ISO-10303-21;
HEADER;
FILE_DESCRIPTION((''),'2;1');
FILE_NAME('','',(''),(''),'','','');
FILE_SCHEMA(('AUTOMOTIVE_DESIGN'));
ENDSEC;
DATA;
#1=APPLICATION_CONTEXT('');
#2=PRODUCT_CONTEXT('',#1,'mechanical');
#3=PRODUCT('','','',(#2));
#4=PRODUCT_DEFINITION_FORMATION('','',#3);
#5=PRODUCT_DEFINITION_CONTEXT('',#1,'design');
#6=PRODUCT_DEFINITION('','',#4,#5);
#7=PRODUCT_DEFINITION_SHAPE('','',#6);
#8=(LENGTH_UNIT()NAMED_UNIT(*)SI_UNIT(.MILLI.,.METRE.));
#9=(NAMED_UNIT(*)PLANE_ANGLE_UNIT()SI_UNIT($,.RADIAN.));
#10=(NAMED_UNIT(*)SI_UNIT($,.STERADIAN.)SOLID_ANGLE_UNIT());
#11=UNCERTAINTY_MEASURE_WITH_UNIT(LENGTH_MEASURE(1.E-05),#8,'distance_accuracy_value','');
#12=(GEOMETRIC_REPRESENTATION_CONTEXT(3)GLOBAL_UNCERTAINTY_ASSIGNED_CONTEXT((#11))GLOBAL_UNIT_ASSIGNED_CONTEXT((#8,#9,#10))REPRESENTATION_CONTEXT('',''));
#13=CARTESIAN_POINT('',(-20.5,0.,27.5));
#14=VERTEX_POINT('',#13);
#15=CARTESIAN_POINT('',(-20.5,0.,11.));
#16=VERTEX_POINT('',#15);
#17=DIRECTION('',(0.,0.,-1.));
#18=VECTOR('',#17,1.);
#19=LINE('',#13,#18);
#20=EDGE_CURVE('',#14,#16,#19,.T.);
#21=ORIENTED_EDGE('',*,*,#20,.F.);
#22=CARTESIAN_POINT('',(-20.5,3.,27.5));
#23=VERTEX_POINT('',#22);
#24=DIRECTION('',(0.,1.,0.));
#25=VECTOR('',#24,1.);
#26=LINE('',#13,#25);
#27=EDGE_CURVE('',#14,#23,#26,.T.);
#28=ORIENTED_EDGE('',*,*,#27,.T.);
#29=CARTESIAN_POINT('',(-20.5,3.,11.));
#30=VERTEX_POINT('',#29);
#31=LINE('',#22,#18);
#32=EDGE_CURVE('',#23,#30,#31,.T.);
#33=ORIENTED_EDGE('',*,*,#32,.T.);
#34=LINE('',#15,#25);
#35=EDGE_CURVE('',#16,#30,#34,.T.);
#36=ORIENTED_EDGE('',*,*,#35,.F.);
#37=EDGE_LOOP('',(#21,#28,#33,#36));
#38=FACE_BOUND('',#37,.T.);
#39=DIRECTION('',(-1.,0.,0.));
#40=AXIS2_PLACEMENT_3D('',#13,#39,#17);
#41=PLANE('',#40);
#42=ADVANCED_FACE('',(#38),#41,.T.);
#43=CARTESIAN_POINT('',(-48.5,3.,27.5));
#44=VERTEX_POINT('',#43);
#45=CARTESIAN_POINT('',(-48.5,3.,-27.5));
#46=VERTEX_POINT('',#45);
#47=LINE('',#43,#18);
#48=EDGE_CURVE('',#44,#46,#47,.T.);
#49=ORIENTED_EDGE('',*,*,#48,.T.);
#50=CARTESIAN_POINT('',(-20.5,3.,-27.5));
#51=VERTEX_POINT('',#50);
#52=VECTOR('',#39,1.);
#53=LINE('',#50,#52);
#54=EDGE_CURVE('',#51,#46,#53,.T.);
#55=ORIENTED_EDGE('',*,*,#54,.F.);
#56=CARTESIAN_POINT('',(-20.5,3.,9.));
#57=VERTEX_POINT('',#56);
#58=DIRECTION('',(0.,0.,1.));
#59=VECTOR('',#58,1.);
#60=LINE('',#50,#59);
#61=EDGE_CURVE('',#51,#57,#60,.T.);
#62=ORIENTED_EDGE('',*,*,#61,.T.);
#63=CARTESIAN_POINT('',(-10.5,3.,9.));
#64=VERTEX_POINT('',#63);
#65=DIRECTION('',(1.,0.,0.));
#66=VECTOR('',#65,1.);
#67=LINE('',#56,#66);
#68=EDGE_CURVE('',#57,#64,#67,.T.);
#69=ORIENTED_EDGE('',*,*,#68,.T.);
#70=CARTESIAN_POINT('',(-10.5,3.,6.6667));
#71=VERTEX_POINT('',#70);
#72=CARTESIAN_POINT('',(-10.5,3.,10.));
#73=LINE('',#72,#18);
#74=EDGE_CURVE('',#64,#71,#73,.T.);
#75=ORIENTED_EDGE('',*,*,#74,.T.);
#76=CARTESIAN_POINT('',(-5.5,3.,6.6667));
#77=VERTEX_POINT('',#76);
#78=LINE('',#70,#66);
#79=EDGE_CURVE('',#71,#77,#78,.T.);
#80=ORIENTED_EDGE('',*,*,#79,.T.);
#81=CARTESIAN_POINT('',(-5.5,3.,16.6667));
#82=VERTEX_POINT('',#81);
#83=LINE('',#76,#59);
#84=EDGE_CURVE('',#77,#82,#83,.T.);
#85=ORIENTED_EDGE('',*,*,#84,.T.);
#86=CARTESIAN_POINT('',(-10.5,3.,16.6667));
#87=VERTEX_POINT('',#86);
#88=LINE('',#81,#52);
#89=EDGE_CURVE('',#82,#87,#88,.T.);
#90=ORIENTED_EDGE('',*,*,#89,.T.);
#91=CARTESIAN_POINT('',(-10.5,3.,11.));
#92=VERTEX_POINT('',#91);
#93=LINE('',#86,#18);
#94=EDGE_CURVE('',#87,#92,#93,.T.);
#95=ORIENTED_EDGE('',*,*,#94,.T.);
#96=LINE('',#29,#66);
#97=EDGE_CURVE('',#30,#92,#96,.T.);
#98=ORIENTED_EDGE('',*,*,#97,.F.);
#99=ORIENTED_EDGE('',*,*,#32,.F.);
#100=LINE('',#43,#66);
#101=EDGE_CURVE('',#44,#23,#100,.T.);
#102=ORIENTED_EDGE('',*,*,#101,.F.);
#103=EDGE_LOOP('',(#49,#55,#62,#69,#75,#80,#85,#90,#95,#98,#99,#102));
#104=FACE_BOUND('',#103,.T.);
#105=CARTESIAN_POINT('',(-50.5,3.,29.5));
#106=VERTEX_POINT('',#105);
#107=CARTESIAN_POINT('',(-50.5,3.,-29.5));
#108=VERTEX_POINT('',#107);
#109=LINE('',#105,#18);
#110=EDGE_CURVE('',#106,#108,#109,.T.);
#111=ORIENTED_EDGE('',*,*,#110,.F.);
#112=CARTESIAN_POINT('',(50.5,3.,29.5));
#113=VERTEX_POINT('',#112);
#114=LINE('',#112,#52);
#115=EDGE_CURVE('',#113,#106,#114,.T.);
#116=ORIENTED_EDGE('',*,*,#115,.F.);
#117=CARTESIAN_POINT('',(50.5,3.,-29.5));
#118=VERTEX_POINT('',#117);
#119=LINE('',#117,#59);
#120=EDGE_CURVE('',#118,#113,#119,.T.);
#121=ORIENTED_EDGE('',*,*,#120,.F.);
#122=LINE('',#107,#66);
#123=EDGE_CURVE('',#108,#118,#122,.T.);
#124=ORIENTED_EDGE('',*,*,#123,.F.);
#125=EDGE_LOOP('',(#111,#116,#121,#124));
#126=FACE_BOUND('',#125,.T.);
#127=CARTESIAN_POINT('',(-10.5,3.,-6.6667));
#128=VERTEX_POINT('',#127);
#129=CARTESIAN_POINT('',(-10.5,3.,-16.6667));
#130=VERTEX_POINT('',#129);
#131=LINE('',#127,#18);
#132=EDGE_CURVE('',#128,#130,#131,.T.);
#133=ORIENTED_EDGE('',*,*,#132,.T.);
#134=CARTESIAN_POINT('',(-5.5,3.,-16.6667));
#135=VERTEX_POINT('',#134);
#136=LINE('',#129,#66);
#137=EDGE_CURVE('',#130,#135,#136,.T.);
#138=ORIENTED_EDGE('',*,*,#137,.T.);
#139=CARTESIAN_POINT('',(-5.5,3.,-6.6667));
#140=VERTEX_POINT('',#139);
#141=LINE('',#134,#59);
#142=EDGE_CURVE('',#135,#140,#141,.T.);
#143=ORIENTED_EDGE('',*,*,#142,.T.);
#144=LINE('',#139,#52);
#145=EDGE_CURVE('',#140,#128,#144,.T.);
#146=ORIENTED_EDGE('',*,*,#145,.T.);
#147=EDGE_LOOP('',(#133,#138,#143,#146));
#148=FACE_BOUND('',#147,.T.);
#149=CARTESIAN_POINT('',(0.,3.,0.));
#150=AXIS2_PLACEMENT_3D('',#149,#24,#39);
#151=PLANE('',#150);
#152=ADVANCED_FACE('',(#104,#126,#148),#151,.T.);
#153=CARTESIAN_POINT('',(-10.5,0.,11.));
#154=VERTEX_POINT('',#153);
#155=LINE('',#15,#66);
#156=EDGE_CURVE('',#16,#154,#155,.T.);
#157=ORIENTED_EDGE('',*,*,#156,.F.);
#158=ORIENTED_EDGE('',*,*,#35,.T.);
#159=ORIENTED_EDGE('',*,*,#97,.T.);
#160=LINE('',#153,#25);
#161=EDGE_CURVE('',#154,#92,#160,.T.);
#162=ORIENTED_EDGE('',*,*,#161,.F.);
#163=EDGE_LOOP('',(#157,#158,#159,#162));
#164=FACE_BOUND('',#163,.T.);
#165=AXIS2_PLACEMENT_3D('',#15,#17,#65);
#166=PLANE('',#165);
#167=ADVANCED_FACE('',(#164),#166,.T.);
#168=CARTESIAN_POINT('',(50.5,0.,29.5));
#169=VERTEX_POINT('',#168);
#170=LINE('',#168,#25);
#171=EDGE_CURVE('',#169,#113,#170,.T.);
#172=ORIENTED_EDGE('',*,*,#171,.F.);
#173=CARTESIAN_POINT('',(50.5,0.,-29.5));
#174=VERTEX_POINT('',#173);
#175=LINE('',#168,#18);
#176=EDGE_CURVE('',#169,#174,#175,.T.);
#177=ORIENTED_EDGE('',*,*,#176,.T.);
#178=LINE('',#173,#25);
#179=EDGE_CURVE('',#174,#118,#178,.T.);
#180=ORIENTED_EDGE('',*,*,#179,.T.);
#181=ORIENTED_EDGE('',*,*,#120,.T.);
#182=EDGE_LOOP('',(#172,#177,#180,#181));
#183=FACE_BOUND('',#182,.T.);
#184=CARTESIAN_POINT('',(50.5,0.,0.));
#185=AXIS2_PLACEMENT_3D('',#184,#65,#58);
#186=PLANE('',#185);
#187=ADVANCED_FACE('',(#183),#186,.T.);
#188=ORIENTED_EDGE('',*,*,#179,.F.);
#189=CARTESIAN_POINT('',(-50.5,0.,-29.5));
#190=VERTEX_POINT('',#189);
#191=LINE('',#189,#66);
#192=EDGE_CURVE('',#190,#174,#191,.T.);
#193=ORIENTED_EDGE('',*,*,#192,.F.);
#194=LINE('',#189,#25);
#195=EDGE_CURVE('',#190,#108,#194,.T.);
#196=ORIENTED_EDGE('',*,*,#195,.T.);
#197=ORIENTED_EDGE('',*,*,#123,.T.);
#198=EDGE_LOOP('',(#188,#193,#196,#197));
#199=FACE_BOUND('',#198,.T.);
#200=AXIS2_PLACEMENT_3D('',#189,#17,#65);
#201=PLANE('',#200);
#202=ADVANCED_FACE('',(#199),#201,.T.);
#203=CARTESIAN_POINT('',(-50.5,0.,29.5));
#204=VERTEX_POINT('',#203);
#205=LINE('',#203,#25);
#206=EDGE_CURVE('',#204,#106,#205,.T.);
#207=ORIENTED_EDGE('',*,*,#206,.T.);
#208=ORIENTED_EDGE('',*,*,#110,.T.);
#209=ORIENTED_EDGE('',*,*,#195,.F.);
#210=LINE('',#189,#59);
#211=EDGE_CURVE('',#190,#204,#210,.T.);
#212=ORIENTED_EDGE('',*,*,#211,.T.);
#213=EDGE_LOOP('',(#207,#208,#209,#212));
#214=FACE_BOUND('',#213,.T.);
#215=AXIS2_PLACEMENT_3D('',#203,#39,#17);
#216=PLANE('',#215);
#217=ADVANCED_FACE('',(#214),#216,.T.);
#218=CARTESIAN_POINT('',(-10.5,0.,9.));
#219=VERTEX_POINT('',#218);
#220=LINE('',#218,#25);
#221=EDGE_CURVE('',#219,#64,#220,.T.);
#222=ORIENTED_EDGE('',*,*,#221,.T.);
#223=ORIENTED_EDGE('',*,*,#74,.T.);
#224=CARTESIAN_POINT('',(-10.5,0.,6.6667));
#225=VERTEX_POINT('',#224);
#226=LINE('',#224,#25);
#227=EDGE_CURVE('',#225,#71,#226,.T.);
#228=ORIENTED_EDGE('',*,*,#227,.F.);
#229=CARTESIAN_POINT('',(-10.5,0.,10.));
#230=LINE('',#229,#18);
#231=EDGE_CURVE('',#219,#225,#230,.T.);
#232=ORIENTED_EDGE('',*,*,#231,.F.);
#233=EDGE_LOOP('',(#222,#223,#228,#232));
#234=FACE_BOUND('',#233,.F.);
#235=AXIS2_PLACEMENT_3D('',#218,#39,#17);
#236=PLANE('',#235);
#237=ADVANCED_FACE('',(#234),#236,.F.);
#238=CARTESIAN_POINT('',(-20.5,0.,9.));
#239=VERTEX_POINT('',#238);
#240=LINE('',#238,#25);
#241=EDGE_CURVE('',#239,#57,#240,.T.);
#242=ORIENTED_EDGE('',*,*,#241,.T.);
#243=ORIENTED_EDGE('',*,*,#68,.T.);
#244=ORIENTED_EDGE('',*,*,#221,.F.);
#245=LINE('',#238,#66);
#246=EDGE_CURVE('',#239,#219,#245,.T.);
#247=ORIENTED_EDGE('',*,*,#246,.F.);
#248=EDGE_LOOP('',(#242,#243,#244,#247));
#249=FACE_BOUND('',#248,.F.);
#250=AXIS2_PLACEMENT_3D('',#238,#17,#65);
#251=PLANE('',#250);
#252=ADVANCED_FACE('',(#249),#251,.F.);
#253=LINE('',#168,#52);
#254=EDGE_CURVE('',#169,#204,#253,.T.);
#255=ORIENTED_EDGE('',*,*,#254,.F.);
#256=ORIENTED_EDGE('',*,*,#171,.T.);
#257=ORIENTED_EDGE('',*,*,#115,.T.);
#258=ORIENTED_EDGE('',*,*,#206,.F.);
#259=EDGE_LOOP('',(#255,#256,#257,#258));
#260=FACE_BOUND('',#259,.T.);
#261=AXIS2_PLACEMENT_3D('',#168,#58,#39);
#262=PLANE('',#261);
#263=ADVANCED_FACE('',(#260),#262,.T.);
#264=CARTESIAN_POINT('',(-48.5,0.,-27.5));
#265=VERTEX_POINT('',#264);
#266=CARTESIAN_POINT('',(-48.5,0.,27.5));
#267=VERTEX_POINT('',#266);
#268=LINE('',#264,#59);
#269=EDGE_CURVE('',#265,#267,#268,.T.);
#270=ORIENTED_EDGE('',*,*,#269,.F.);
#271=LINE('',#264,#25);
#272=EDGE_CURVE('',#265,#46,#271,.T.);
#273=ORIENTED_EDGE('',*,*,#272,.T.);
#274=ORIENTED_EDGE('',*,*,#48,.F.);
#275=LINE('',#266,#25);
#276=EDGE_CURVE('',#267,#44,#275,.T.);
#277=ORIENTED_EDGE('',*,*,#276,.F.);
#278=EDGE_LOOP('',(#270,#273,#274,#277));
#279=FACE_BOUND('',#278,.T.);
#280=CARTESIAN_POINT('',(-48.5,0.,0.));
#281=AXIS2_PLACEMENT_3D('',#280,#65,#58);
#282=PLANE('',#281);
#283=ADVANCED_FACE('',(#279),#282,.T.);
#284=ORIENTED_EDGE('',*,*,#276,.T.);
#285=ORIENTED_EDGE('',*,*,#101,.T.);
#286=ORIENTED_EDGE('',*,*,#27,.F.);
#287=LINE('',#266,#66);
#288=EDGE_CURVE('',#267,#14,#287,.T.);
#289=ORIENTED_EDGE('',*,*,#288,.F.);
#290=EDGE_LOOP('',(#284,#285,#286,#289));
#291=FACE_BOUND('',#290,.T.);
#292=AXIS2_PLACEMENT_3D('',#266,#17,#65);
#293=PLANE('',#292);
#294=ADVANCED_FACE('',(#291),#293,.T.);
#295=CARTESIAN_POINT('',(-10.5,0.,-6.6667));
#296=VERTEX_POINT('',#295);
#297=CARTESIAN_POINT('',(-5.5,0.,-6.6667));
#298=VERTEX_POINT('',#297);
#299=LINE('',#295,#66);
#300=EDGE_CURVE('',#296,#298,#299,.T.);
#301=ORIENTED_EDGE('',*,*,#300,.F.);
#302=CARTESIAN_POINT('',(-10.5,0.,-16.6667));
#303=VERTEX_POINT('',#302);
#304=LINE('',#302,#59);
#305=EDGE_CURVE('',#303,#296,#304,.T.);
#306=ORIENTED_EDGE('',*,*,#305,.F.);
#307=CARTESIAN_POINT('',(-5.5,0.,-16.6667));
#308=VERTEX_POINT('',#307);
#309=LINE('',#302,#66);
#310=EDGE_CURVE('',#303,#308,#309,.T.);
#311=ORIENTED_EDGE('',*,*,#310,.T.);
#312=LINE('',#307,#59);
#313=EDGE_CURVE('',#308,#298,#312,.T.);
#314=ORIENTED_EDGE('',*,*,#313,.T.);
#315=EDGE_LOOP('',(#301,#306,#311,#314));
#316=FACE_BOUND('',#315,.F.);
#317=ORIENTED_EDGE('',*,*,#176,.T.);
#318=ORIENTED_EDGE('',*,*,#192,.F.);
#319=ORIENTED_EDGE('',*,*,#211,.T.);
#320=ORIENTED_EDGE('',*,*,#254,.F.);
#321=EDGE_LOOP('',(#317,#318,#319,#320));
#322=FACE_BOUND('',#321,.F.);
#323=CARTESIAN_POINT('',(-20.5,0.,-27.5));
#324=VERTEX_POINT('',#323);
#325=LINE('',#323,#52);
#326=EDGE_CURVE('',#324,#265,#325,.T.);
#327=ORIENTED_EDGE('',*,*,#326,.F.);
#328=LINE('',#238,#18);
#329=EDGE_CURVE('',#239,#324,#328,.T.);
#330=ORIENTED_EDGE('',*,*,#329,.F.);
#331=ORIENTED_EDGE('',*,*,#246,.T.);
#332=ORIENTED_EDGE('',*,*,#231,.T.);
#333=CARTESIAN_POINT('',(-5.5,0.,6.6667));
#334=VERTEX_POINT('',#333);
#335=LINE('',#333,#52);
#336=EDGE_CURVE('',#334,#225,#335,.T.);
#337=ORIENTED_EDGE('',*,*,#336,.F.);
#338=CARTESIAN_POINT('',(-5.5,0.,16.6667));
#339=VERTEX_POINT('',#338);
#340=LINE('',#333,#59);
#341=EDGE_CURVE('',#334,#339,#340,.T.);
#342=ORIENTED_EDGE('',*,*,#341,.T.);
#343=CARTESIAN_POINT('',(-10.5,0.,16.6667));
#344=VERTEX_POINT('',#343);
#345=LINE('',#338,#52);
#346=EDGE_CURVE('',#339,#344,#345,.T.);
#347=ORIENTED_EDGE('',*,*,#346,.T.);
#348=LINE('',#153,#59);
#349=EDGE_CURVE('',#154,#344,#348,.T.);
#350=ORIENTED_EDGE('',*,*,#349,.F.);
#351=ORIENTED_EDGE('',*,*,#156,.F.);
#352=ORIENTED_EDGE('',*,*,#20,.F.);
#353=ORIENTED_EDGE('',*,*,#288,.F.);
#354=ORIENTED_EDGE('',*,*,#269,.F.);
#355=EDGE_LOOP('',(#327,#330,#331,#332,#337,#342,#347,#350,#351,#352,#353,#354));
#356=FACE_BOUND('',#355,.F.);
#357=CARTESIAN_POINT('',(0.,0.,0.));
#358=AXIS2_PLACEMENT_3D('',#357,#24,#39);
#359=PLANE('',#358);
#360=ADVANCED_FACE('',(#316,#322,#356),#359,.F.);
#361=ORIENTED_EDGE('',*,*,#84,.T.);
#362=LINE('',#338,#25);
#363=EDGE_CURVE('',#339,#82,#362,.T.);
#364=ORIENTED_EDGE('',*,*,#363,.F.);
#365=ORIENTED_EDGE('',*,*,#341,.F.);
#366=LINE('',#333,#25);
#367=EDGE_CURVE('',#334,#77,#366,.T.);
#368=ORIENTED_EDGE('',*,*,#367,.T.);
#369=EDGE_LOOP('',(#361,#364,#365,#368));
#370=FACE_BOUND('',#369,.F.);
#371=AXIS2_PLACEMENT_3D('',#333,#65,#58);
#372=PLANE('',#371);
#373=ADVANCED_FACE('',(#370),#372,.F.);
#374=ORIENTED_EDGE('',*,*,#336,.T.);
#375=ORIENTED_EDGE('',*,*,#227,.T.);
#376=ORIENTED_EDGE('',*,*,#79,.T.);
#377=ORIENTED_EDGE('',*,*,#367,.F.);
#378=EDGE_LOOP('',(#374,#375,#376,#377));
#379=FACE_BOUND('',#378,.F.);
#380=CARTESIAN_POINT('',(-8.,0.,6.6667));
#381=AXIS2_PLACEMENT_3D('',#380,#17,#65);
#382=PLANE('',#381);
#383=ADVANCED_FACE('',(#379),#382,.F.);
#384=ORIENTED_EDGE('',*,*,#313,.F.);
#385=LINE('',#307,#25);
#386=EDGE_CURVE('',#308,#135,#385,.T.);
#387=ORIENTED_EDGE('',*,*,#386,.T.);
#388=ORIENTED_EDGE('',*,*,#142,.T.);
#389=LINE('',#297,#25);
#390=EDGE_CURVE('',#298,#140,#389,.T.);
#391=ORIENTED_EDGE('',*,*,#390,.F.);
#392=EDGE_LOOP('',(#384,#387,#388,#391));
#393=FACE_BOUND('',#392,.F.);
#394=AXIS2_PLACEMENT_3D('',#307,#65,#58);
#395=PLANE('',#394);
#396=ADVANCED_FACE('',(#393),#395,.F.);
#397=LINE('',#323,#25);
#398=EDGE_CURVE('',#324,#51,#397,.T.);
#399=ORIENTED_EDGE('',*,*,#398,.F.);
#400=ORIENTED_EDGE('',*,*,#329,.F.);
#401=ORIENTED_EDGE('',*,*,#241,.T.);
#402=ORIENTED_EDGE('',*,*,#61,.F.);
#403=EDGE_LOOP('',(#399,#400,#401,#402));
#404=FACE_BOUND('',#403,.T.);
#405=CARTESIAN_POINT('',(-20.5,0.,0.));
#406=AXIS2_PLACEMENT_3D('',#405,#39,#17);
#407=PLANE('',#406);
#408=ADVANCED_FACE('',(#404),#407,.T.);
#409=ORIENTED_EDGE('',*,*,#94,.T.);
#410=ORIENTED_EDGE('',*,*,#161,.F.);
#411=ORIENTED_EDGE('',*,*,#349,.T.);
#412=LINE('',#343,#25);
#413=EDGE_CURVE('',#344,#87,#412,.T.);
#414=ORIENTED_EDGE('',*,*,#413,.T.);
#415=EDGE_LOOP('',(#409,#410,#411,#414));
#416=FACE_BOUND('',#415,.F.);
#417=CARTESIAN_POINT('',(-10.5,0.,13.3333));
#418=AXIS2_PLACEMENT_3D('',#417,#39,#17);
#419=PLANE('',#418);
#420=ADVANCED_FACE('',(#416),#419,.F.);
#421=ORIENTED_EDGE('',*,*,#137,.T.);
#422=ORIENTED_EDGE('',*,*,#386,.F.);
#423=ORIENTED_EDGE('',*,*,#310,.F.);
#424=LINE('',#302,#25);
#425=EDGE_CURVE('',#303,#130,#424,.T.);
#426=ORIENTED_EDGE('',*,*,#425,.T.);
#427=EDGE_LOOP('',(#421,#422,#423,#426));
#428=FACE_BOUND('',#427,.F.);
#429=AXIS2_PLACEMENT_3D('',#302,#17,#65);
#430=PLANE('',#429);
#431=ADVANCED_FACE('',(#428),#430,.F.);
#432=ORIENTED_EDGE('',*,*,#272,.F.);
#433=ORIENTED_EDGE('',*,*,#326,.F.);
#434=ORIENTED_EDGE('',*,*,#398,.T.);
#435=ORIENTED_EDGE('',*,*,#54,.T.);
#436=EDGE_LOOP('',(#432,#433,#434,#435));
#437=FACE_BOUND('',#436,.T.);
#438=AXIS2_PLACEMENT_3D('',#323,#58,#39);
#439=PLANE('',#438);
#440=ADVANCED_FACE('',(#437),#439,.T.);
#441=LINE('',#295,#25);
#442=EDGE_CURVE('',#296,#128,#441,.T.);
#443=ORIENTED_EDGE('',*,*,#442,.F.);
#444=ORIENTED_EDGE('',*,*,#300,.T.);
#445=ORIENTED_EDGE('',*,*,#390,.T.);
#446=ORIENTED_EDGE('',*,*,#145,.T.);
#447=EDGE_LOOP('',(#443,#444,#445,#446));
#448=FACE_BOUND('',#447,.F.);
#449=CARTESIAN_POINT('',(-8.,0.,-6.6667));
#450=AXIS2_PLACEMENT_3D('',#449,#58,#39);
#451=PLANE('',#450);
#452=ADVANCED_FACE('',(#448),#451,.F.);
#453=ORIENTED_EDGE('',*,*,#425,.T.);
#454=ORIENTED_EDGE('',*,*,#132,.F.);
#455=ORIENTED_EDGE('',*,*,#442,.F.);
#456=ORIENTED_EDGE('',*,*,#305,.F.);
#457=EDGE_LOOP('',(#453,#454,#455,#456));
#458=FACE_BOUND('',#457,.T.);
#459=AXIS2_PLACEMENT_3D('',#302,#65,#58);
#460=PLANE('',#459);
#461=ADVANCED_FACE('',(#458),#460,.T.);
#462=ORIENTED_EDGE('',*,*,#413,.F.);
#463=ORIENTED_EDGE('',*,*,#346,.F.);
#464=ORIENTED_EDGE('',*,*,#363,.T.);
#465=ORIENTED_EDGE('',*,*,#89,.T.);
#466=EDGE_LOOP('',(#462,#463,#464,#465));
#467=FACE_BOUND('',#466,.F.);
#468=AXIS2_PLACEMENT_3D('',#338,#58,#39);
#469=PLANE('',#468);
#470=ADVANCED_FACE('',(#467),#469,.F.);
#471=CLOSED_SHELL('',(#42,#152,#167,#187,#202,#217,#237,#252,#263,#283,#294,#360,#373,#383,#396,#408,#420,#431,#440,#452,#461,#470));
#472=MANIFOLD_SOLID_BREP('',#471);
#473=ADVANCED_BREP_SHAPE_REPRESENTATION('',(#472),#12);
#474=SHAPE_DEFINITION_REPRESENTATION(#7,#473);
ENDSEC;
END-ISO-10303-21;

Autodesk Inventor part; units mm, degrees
ref_plane "YZ Plane" through (0, 0, 0) normal (1, 0, 0) x (0, 1, 0)
ref_plane "XZ Plane" through (0, 0, 0) normal (0, 1, 0) x (-1, 0, 0)
ref_plane "XY Plane" through (0, 0, 0) normal (0, 0, 1) x (1, 0, 0)
sketch "Sketch1" plane through (0, 0, 0) normal (0, 1, 0) x (-1, 0, 0)
  line L0 (-50.5, 29.5) -> (50.5, 29.5)
  line L1 (50.5, 29.5) -> (50.5, -29.5)
  line L2 (50.5, -29.5) -> (-50.5, -29.5)
  line L3 (-50.5, -29.5) -> (-50.5, 29.5)
  line L4 (-50.5, 29.5) -> (50.5, -29.5) construction
  line L5 (50.5, 29.5) -> (-50.5, -29.5) construction
  line L6 (5.5, 16.6667) -> (10.5, 16.6667)
  line L7 (10.5, 6.6667) -> (5.5, 6.6667)
  line L8 (5.5, 6.6667) -> (5.5, 16.6667)
  line L9 (5.5, 16.6667) -> (10.5, 6.6667) construction
  line L10 (10.5, 16.6667) -> (5.5, 6.6667) construction
  line L11 (5.5, -6.6667) -> (10.5, -6.6667)
  line L12 (10.5, -16.6667) -> (5.5, -16.6667)
  line L13 (5.5, -16.6667) -> (5.5, -6.6667)
  line L14 (5.5, -6.6667) -> (10.5, -16.6667) construction
  line L15 (10.5, -6.6667) -> (5.5, -16.6667) construction
  line L16 (10.5, 10) -> (20.5, 10)
  line L17 (20.5, 11) -> (20.5, 9)
  line L18 (20.5, 9) -> (10.5, 9)
  line L19 (20.5, 11) -> (10.5, 11)
  line L20 (48.5, 27.5) -> (20.5, 27.5)
  line L21 (20.5, 27.5) -> (20.5, -27.5)
  line L22 (20.5, -27.5) -> (48.5, -27.5)
  line L23 (48.5, -27.5) -> (48.5, 27.5)
  line L24 (10.5, 16.6667) -> (10.5, 13.3333)
  line L25 (10.5, 13.3333) -> (10.5, 10)
  line L26 (10.5, 10) -> (10.5, 6.6667)
  line L27 (10.5, -16.6667) -> (10.5, -13.3333)
  line L28 (10.5, -13.3333) -> (10.5, -10)
  line L29 (10.5, -10) -> (10.5, -6.6667)
  line L30 (8, -11.6667) -> (8, 11.6667)
  line L31 (-50.5, 0) -> (50.5, 0)
  point P0 (0, 0)
  point P1 (0, 29.5)
  point P2 (0, -29.5)
  point P3 (0, 0)
  point P4 (8, 0)
  dimension "d0" = 101
  dimension "d1" = 59
  dimension "d7" = 5
  dimension "d8" = 10
  dimension "d9" = 5
  dimension "d10" = 10
  dimension "d11" = 10
  dimension "d12" = 2
  dimension "d16" = 2
  dimension "d17" = 2
  dimension "d18" = 2
  dimension "d19" = 28
  dimension "d20" = 20
extrude "Extrusion2" add sketch "Sketch1" along normal blind 3 contours L0 L1 L31 L23 L20 L21 L19 L25 L24 L6 L8 L7 L30 L3 | L31 L21 L22 L23 L1 L2 L3 | L30 L7 L26 L18 L21 L31
properties part number "Lag 3"
